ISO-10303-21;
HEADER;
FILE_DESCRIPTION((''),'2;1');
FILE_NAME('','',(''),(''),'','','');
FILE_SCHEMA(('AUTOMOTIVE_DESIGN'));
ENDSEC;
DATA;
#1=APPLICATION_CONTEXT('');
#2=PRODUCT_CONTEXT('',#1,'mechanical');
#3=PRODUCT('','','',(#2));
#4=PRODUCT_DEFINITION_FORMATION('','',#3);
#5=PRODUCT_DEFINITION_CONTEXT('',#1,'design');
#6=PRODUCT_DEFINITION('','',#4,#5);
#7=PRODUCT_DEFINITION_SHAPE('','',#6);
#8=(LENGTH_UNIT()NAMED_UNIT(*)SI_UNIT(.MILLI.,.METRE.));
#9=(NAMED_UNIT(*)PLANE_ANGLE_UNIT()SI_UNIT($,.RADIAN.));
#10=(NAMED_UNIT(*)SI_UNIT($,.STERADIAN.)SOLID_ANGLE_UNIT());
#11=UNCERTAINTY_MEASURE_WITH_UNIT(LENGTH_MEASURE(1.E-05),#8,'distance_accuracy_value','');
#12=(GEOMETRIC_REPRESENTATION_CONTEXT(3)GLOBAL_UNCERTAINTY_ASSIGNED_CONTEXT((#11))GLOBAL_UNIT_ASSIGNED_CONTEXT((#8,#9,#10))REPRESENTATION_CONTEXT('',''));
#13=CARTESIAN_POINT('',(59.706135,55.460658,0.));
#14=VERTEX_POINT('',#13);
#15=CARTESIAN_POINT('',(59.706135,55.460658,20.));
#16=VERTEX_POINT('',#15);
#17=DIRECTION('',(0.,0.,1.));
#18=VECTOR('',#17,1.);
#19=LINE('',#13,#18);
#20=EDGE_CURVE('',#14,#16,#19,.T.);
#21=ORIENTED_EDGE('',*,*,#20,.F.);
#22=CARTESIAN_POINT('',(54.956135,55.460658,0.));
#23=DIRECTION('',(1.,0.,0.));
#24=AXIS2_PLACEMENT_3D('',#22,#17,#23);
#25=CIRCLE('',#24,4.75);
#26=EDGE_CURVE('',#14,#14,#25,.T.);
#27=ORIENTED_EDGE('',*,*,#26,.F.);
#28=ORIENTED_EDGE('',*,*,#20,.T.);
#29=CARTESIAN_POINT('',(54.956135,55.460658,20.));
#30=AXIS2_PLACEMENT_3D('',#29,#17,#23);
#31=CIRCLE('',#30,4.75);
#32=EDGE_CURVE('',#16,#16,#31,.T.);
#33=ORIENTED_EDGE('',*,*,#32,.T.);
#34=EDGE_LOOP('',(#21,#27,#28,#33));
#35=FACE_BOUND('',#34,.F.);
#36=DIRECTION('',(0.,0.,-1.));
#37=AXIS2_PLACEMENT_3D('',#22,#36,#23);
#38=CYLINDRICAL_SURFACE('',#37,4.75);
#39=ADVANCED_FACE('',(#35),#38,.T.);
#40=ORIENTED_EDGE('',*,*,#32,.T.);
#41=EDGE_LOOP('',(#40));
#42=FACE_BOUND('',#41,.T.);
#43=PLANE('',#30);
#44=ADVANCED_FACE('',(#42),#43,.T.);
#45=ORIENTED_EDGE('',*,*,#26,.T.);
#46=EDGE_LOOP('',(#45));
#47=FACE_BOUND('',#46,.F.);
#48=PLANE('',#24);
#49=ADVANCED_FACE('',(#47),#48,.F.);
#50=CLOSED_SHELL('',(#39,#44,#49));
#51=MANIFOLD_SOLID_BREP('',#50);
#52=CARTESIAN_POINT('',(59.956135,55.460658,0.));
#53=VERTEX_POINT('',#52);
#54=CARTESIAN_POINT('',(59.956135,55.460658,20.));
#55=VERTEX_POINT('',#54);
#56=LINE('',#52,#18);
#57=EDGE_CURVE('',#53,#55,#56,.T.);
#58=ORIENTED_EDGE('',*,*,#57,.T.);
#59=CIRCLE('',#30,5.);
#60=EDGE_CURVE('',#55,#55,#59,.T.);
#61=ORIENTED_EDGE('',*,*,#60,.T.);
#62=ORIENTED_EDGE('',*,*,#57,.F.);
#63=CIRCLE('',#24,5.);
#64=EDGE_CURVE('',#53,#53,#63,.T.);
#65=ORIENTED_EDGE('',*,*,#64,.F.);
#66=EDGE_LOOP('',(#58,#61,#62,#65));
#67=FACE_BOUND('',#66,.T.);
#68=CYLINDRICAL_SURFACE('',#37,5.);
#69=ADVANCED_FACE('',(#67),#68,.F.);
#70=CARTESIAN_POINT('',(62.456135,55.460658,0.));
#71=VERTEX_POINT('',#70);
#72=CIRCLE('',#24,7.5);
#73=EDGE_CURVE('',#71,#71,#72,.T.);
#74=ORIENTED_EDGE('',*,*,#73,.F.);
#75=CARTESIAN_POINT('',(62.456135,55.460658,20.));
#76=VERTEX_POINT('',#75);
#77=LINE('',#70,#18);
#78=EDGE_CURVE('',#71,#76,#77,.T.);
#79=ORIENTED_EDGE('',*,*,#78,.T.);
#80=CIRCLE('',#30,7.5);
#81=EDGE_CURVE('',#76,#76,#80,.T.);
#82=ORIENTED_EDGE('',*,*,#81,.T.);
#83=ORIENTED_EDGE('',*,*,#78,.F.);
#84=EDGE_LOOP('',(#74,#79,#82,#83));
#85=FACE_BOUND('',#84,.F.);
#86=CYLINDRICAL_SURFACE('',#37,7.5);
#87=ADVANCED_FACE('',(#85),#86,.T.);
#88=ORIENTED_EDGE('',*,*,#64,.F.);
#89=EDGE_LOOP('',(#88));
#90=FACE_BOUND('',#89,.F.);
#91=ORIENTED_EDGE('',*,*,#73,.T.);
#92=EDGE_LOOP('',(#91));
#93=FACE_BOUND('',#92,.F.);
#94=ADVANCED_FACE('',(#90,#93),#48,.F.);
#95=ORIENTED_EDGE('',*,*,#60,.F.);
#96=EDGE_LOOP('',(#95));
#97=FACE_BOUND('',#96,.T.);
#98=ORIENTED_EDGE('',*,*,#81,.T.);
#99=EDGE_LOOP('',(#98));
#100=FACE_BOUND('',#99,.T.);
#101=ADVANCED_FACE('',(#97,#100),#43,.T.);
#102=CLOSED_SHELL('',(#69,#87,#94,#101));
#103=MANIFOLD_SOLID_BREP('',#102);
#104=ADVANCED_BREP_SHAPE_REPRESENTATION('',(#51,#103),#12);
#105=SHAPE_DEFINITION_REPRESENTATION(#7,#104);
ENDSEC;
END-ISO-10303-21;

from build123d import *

# Parameters (mm, degrees)
F0_R     = 7.5
F0_R_2   = 5
F1_DEPTH = 20
F2_R     = 4.75
F3_DEPTH = 20


# Not quite as in the source:
# - a feature names something its author has since deleted; it is built from what else it names


with BuildPart() as f1:
    # F0 (on Top) → F1 (new body)
    with BuildSketch(Plane.XY):
        with Locations((54.9561347067, 55.4606581624)):
            Circle(F0_R)
        with Locations((54.9561347067, 55.4606581624)):
            Circle(F0_R_2, mode=Mode.SUBTRACT)
    extrude(amount=F1_DEPTH)


with BuildPart() as f3:
    # F2 (on Top) → F3 (new body)
    with BuildSketch(Plane.XY):
        with Locations((54.9561347067, 55.4606581624)):
            Circle(F2_R)
    extrude(amount=F3_DEPTH)


solid = Compound([f1.part, f3.part])
